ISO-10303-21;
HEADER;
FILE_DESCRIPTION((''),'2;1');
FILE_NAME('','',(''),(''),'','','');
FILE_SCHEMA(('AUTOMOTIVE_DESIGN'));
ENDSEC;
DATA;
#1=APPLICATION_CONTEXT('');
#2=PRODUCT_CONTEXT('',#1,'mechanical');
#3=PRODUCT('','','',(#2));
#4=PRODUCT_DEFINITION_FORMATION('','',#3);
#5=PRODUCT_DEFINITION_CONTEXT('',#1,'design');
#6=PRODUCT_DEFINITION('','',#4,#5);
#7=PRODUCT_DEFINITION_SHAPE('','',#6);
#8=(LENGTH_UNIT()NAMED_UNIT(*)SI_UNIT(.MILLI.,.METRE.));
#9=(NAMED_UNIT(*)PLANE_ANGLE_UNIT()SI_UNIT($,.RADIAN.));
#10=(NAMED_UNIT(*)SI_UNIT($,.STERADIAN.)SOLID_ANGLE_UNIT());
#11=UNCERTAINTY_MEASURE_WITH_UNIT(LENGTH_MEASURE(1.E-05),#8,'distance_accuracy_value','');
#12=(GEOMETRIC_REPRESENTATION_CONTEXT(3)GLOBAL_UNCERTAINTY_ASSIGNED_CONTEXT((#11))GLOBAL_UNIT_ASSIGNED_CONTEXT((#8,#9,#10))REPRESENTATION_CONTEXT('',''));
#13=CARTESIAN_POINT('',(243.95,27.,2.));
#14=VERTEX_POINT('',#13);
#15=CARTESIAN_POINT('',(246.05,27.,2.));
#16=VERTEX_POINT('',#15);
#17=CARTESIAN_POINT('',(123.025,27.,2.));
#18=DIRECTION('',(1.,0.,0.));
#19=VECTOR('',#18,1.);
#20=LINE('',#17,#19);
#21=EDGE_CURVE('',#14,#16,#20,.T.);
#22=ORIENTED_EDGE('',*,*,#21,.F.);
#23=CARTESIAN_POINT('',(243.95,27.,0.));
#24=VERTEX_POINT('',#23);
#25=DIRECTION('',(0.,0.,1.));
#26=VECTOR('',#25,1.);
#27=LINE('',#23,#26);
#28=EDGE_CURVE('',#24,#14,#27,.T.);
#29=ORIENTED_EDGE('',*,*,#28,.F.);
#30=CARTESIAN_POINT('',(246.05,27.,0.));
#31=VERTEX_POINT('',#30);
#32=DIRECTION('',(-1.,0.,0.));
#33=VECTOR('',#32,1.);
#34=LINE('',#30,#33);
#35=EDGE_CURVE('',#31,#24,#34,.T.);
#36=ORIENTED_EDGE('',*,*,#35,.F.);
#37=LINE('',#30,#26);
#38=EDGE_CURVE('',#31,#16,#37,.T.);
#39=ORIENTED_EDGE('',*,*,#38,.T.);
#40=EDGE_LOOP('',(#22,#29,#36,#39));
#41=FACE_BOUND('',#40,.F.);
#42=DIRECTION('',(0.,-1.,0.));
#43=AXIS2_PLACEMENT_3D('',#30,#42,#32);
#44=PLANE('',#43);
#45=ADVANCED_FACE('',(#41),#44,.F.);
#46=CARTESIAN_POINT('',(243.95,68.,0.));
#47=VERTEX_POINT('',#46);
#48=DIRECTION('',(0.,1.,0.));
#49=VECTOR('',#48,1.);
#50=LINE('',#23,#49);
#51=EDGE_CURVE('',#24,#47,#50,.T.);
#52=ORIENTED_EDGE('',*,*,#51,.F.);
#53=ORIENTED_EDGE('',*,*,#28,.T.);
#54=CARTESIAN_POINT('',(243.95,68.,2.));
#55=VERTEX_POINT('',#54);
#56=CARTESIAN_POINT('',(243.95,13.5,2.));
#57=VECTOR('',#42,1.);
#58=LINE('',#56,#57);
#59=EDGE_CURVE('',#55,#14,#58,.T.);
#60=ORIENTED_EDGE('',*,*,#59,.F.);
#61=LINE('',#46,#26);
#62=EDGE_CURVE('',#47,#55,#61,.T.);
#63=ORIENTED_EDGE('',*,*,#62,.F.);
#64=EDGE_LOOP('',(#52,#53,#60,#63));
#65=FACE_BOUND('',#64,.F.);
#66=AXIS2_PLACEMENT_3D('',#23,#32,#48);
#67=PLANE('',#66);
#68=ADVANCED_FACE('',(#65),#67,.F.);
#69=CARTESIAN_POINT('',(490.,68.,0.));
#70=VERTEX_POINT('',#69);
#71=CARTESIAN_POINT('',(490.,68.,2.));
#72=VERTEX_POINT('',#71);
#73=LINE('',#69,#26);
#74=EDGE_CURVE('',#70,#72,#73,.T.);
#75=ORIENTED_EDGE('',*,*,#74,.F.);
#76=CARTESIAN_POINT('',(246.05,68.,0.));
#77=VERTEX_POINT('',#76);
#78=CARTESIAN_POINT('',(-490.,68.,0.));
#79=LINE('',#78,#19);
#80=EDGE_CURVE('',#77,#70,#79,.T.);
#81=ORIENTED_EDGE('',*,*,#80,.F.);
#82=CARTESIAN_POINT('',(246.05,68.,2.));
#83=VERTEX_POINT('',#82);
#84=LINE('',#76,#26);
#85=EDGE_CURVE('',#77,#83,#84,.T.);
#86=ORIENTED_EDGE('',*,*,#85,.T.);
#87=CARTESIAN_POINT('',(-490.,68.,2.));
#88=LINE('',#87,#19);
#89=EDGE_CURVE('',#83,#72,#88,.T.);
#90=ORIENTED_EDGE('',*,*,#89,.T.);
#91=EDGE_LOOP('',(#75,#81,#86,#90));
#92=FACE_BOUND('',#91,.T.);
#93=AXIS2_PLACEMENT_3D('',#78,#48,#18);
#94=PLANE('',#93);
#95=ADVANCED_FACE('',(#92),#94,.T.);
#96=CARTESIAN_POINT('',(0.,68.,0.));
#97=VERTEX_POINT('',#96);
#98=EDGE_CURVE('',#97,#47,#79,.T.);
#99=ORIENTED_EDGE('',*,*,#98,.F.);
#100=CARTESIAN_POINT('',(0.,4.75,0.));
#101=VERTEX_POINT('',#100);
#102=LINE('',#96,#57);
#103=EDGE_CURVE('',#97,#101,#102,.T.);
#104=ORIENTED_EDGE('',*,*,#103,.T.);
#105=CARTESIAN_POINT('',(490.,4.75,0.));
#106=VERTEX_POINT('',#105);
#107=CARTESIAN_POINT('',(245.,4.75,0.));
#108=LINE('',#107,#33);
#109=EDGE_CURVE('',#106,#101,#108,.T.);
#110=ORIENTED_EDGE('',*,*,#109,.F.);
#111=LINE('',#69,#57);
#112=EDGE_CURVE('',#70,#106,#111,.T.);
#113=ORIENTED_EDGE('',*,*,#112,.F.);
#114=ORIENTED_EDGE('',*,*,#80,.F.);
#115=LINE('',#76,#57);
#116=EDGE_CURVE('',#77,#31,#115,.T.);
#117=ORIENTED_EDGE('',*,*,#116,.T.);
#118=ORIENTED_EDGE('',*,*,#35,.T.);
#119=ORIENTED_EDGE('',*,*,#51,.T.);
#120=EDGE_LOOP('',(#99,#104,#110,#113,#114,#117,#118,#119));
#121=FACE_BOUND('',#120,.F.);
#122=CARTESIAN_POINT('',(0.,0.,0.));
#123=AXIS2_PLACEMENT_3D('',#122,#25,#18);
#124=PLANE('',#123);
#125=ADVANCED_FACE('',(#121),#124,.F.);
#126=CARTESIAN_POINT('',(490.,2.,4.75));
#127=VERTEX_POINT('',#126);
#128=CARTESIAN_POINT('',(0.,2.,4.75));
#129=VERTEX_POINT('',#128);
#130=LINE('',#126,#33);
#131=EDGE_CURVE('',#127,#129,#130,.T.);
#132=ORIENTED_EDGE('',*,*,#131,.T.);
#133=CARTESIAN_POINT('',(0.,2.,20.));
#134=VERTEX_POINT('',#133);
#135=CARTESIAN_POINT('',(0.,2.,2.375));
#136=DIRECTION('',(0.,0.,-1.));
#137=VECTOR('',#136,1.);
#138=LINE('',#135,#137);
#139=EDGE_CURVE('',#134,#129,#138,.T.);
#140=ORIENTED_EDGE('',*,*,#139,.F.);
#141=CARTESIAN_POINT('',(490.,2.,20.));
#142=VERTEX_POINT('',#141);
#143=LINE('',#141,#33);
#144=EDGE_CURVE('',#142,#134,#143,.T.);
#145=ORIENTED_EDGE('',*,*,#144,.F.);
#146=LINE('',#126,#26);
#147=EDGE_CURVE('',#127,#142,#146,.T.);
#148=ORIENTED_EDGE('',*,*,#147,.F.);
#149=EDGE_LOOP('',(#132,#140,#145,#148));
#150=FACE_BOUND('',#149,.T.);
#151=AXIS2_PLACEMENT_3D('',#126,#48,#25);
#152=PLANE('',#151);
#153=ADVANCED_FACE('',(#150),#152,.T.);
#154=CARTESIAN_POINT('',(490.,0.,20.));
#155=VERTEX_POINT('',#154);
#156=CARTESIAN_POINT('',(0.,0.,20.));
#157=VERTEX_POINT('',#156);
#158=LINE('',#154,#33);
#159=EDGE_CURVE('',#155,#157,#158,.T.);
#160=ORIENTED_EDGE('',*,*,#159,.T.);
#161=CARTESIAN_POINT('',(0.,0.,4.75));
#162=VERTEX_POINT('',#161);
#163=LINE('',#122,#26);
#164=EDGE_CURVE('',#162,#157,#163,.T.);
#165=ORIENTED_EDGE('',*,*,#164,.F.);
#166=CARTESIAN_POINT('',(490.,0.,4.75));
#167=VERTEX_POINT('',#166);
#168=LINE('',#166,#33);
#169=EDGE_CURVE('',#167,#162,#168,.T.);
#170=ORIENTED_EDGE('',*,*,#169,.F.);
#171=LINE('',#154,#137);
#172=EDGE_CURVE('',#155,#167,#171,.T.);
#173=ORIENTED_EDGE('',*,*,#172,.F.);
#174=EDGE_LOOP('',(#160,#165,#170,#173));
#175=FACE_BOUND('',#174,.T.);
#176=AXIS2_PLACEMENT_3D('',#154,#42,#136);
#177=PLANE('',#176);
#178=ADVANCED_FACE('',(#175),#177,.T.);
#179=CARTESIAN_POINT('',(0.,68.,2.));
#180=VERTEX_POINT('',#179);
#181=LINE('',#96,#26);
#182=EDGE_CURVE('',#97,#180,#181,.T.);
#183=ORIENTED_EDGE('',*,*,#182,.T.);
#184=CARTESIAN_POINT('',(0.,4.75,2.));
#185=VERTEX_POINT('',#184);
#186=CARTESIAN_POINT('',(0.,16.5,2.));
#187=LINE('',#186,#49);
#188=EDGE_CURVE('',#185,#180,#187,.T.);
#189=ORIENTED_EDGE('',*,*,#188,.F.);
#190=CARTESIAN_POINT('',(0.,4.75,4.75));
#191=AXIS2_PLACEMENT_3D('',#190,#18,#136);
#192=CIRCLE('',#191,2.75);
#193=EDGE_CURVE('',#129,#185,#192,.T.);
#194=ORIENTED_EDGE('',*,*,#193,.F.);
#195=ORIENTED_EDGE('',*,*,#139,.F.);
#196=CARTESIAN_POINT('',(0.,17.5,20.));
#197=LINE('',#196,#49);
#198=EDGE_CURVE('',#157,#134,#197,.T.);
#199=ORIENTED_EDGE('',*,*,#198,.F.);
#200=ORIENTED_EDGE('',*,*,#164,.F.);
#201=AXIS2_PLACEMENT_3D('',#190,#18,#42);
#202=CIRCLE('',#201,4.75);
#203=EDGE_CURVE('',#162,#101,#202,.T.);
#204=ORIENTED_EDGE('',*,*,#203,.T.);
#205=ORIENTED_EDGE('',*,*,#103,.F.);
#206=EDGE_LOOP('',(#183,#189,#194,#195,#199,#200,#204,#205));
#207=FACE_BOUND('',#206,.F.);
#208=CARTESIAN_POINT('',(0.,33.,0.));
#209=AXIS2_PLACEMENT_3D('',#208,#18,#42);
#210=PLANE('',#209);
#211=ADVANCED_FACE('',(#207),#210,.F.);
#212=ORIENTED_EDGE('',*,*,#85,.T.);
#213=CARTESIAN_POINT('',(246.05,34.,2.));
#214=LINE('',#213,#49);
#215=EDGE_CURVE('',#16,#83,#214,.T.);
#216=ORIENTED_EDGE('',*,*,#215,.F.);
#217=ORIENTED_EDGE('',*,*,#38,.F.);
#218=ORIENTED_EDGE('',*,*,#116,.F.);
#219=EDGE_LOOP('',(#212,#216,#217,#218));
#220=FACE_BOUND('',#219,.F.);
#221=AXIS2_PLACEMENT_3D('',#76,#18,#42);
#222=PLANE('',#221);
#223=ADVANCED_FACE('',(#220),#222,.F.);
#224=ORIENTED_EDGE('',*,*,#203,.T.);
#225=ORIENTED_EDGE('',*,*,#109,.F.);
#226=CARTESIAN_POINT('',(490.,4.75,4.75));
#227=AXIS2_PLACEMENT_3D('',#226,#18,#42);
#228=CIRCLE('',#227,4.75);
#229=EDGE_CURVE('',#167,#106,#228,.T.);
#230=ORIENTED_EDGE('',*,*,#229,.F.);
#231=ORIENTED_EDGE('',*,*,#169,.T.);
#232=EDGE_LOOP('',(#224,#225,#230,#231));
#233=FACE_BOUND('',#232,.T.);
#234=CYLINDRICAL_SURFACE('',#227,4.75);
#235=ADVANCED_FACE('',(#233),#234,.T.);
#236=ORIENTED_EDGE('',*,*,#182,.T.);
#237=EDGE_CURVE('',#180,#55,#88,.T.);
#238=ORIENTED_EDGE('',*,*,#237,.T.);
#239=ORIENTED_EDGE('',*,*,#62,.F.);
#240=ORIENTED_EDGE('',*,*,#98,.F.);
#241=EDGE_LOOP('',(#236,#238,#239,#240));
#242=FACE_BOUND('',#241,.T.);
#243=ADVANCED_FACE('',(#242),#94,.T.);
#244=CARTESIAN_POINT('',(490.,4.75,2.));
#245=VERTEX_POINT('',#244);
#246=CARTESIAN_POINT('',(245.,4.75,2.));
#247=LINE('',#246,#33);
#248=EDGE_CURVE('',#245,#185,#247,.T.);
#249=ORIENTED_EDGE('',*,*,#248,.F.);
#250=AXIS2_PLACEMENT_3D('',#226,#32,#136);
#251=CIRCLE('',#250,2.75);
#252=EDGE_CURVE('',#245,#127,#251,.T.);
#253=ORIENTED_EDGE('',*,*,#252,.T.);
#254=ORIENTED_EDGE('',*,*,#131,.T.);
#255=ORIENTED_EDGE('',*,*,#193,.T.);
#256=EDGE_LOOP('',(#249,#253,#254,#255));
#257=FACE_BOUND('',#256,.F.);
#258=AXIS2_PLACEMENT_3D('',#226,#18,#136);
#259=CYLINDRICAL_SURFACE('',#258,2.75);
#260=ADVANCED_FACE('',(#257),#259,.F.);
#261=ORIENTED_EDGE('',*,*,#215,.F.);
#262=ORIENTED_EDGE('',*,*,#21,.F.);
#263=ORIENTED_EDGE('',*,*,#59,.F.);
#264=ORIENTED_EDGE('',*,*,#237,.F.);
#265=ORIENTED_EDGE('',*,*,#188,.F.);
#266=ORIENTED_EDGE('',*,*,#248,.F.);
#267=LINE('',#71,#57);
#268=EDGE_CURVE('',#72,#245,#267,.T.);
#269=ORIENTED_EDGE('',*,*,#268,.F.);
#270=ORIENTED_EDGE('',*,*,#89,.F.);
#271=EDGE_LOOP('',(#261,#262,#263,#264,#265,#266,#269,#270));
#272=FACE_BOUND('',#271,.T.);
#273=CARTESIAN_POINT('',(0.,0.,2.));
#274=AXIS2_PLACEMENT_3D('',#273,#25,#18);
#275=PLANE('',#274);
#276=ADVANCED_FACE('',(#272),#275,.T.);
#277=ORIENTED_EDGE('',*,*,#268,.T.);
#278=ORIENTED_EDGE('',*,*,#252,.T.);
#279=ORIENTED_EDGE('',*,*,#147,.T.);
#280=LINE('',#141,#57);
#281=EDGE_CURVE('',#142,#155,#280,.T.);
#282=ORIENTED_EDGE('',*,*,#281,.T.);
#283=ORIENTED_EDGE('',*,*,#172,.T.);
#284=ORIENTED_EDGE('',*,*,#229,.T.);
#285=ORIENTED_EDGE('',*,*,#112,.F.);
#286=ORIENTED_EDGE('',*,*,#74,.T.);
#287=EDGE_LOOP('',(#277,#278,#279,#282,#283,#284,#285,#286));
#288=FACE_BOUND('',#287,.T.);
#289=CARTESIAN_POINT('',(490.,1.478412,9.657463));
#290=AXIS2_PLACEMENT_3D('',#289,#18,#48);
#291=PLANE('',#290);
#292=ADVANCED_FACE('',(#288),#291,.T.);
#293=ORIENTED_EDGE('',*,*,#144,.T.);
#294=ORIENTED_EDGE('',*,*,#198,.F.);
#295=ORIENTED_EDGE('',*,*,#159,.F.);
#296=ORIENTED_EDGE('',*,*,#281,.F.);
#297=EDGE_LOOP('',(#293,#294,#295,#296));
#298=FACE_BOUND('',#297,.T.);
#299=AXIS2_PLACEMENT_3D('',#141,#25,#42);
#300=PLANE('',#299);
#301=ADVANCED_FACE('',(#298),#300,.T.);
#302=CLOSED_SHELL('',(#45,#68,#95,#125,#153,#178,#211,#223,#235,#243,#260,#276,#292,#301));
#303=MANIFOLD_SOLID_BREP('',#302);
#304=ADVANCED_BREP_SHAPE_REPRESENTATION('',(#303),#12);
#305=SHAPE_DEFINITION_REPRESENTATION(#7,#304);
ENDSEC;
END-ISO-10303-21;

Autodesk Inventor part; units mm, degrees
ref_plane "YZ Plane" through (0, 0, 0) normal (1, 0, 0) x (0, 1, 0)
ref_plane "XZ Plane" through (0, 0, 0) normal (0, 1, 0) x (-1, 0, 0)
ref_plane "XY Plane" through (0, 0, 0) normal (0, 0, 1) x (1, 0, 0)
sketch "Sketch1" plane through (0, 0, 0) normal (0, 0, 1) x (1, 0, 0)
  line L0 (-490, 68) -> (490, 68)
  line L1 (490, 68) -> (490, 0)
  line L2 (490, 0) -> (-490, 0)
  line L3 (-490, 0) -> (-490, 68)
  point P0 (0, 0)
  point P1 (0, 0)
  dimension "d0" = 980
  dimension "d1" = 68
extrude "Plate1" add sketch "Sketch1" along normal blind 2
sketch "Sketch2" plane through (490, 2, 0) normal (0, -1, 0) x (1, 0, 0)
  line L0 (-980, 0) -> (0, 0)
  line L1 (0, 0) -> (0, 20)
  line L2 (0, 20) -> (-980, 20)
  line L3 (-980, 20) -> (-980, 0)
edge flange "Flange1" height 20 angle 90 thickness 2 bend radius 2.75 thickness toward (0, -1, 0) relief round relief width 2 relief depth 1 edges at (0, 0, 2) wall of the first edge with corners at (-490, 2, 0) (490, 2, 0) (490, 2, 20) (-490, 2, 20)
bend "Bend1"
corner "Corner1"
sketch "Sketch5" plane through (0, 0, 0) normal (0, 0, -1) x (-1, 0, 0)
  line L0 (490, 68) -> (-490, 68) projected
  line L1 (490, 0) -> (-490, 0) projected
  circle A0 centre (0, 68) radius 35
  line L2 (243.95, 68) -> (246.05, 68)
  line L3 (246.05, 68) -> (246.05, 27)
  line L4 (246.05, 27) -> (243.95, 27)
  line L5 (243.95, 27) -> (243.95, 68)
  line L6 (-243.95, 68) -> (-246.05, 68)
  line L7 (-246.05, 68) -> (-246.05, 27)
  line L8 (-246.05, 27) -> (-243.95, 27)
  line L9 (-243.95, 27) -> (-243.95, 68)
  line L10 (0, 68) -> (0, 0) construction
  line L11 (0, 68) -> (0, 0)
  line L12 (490, 68) -> (490, 4.75) projected
  line L13 (490, 0) -> (490, 4.75) projected
  line L14 (-490, 4.75) -> (-490, 68) projected
  line L15 (-490, 4.75) -> (-490, 0) projected
  point P0 (0, 0)
  point P1 (245, 27)
  point P2 (-245, 27)
  point P3 (-35, 68)
  point P4 (35, 68)
  dimension "d45" = 70
  dimension "d48" = 2.1
  dimension "d49" = 490
  dimension "d51" = 27
  dimension "d52" = 41
extrude "Extrusion1" cut sketch "Sketch5" against normal through all contours L12 L13 L1 L11 A0 L0 L5 L4 L3 | L3 L4 L5 L0 | A0 L11 L0 | L9 L8 L7 L0 picked at (23.0408, 65.4039)
sketch "Sketch9" plane through (0, 0, 2) normal (0, 0, 1) x (1, 0, 0)
  line L0 (485.6141, 29.596) -> (485.6141, 17.596) construction
  line L1 (485.6141, 17.596) -> (285.6141, 17.596) construction
  line L2 (285.6141, 17.596) -> (285.6141, 29.596) construction
  line L3 (285.6141, 29.596) -> (485.6141, 29.596) construction
  line L4 (-490, 68) -> (490, 68) projected
  point P0 (0, 0)
  point P1 (1.05, 68)
  dimension "d40" = 200
  dimension "d41" = 12
mark "Mark2"
equation "\"d1\" = СПИНА_Стрингер_2_высота"
equation "\"d2\" = Thickness"
equation "\"d3\" = BendReliefWidth"
equation "\"d4\" = BendReliefDepth"
equation "\"d5\" = MinimumRemnant"
equation "\"d6\" = TransitionRadius"
equation "\"d9\" = BendRadius"
equation "\"d10\" = CornerReliefSize"
equation "\"d11\" = GapSize"
equation "\"d12\" = JacobiRadiusSize"
equation "\"BendReliefWidth\" = Thickness"
equation "\"BendReliefDepth\" = 0.5 * Thickness"
equation "\"CornerReliefSize\" = 4 * Thickness"
equation "\"MinimumRemnant\" = 2 * Thickness"
equation "\"TransitionRadius\" = BendRadius"
equation "\"JacobiRadiusSize\" = BendRadius"
equation "\"GapSize\" = Thickness"
equation "\"СПИНА_Стрингер_2_высота\" = 68"
equation "\"Thickness\" = 2"
equation "\"BendRadius\" = 2.75"
properties part number "MSC 207 STRINGER BACK ^^" material "Stainless Steel"
